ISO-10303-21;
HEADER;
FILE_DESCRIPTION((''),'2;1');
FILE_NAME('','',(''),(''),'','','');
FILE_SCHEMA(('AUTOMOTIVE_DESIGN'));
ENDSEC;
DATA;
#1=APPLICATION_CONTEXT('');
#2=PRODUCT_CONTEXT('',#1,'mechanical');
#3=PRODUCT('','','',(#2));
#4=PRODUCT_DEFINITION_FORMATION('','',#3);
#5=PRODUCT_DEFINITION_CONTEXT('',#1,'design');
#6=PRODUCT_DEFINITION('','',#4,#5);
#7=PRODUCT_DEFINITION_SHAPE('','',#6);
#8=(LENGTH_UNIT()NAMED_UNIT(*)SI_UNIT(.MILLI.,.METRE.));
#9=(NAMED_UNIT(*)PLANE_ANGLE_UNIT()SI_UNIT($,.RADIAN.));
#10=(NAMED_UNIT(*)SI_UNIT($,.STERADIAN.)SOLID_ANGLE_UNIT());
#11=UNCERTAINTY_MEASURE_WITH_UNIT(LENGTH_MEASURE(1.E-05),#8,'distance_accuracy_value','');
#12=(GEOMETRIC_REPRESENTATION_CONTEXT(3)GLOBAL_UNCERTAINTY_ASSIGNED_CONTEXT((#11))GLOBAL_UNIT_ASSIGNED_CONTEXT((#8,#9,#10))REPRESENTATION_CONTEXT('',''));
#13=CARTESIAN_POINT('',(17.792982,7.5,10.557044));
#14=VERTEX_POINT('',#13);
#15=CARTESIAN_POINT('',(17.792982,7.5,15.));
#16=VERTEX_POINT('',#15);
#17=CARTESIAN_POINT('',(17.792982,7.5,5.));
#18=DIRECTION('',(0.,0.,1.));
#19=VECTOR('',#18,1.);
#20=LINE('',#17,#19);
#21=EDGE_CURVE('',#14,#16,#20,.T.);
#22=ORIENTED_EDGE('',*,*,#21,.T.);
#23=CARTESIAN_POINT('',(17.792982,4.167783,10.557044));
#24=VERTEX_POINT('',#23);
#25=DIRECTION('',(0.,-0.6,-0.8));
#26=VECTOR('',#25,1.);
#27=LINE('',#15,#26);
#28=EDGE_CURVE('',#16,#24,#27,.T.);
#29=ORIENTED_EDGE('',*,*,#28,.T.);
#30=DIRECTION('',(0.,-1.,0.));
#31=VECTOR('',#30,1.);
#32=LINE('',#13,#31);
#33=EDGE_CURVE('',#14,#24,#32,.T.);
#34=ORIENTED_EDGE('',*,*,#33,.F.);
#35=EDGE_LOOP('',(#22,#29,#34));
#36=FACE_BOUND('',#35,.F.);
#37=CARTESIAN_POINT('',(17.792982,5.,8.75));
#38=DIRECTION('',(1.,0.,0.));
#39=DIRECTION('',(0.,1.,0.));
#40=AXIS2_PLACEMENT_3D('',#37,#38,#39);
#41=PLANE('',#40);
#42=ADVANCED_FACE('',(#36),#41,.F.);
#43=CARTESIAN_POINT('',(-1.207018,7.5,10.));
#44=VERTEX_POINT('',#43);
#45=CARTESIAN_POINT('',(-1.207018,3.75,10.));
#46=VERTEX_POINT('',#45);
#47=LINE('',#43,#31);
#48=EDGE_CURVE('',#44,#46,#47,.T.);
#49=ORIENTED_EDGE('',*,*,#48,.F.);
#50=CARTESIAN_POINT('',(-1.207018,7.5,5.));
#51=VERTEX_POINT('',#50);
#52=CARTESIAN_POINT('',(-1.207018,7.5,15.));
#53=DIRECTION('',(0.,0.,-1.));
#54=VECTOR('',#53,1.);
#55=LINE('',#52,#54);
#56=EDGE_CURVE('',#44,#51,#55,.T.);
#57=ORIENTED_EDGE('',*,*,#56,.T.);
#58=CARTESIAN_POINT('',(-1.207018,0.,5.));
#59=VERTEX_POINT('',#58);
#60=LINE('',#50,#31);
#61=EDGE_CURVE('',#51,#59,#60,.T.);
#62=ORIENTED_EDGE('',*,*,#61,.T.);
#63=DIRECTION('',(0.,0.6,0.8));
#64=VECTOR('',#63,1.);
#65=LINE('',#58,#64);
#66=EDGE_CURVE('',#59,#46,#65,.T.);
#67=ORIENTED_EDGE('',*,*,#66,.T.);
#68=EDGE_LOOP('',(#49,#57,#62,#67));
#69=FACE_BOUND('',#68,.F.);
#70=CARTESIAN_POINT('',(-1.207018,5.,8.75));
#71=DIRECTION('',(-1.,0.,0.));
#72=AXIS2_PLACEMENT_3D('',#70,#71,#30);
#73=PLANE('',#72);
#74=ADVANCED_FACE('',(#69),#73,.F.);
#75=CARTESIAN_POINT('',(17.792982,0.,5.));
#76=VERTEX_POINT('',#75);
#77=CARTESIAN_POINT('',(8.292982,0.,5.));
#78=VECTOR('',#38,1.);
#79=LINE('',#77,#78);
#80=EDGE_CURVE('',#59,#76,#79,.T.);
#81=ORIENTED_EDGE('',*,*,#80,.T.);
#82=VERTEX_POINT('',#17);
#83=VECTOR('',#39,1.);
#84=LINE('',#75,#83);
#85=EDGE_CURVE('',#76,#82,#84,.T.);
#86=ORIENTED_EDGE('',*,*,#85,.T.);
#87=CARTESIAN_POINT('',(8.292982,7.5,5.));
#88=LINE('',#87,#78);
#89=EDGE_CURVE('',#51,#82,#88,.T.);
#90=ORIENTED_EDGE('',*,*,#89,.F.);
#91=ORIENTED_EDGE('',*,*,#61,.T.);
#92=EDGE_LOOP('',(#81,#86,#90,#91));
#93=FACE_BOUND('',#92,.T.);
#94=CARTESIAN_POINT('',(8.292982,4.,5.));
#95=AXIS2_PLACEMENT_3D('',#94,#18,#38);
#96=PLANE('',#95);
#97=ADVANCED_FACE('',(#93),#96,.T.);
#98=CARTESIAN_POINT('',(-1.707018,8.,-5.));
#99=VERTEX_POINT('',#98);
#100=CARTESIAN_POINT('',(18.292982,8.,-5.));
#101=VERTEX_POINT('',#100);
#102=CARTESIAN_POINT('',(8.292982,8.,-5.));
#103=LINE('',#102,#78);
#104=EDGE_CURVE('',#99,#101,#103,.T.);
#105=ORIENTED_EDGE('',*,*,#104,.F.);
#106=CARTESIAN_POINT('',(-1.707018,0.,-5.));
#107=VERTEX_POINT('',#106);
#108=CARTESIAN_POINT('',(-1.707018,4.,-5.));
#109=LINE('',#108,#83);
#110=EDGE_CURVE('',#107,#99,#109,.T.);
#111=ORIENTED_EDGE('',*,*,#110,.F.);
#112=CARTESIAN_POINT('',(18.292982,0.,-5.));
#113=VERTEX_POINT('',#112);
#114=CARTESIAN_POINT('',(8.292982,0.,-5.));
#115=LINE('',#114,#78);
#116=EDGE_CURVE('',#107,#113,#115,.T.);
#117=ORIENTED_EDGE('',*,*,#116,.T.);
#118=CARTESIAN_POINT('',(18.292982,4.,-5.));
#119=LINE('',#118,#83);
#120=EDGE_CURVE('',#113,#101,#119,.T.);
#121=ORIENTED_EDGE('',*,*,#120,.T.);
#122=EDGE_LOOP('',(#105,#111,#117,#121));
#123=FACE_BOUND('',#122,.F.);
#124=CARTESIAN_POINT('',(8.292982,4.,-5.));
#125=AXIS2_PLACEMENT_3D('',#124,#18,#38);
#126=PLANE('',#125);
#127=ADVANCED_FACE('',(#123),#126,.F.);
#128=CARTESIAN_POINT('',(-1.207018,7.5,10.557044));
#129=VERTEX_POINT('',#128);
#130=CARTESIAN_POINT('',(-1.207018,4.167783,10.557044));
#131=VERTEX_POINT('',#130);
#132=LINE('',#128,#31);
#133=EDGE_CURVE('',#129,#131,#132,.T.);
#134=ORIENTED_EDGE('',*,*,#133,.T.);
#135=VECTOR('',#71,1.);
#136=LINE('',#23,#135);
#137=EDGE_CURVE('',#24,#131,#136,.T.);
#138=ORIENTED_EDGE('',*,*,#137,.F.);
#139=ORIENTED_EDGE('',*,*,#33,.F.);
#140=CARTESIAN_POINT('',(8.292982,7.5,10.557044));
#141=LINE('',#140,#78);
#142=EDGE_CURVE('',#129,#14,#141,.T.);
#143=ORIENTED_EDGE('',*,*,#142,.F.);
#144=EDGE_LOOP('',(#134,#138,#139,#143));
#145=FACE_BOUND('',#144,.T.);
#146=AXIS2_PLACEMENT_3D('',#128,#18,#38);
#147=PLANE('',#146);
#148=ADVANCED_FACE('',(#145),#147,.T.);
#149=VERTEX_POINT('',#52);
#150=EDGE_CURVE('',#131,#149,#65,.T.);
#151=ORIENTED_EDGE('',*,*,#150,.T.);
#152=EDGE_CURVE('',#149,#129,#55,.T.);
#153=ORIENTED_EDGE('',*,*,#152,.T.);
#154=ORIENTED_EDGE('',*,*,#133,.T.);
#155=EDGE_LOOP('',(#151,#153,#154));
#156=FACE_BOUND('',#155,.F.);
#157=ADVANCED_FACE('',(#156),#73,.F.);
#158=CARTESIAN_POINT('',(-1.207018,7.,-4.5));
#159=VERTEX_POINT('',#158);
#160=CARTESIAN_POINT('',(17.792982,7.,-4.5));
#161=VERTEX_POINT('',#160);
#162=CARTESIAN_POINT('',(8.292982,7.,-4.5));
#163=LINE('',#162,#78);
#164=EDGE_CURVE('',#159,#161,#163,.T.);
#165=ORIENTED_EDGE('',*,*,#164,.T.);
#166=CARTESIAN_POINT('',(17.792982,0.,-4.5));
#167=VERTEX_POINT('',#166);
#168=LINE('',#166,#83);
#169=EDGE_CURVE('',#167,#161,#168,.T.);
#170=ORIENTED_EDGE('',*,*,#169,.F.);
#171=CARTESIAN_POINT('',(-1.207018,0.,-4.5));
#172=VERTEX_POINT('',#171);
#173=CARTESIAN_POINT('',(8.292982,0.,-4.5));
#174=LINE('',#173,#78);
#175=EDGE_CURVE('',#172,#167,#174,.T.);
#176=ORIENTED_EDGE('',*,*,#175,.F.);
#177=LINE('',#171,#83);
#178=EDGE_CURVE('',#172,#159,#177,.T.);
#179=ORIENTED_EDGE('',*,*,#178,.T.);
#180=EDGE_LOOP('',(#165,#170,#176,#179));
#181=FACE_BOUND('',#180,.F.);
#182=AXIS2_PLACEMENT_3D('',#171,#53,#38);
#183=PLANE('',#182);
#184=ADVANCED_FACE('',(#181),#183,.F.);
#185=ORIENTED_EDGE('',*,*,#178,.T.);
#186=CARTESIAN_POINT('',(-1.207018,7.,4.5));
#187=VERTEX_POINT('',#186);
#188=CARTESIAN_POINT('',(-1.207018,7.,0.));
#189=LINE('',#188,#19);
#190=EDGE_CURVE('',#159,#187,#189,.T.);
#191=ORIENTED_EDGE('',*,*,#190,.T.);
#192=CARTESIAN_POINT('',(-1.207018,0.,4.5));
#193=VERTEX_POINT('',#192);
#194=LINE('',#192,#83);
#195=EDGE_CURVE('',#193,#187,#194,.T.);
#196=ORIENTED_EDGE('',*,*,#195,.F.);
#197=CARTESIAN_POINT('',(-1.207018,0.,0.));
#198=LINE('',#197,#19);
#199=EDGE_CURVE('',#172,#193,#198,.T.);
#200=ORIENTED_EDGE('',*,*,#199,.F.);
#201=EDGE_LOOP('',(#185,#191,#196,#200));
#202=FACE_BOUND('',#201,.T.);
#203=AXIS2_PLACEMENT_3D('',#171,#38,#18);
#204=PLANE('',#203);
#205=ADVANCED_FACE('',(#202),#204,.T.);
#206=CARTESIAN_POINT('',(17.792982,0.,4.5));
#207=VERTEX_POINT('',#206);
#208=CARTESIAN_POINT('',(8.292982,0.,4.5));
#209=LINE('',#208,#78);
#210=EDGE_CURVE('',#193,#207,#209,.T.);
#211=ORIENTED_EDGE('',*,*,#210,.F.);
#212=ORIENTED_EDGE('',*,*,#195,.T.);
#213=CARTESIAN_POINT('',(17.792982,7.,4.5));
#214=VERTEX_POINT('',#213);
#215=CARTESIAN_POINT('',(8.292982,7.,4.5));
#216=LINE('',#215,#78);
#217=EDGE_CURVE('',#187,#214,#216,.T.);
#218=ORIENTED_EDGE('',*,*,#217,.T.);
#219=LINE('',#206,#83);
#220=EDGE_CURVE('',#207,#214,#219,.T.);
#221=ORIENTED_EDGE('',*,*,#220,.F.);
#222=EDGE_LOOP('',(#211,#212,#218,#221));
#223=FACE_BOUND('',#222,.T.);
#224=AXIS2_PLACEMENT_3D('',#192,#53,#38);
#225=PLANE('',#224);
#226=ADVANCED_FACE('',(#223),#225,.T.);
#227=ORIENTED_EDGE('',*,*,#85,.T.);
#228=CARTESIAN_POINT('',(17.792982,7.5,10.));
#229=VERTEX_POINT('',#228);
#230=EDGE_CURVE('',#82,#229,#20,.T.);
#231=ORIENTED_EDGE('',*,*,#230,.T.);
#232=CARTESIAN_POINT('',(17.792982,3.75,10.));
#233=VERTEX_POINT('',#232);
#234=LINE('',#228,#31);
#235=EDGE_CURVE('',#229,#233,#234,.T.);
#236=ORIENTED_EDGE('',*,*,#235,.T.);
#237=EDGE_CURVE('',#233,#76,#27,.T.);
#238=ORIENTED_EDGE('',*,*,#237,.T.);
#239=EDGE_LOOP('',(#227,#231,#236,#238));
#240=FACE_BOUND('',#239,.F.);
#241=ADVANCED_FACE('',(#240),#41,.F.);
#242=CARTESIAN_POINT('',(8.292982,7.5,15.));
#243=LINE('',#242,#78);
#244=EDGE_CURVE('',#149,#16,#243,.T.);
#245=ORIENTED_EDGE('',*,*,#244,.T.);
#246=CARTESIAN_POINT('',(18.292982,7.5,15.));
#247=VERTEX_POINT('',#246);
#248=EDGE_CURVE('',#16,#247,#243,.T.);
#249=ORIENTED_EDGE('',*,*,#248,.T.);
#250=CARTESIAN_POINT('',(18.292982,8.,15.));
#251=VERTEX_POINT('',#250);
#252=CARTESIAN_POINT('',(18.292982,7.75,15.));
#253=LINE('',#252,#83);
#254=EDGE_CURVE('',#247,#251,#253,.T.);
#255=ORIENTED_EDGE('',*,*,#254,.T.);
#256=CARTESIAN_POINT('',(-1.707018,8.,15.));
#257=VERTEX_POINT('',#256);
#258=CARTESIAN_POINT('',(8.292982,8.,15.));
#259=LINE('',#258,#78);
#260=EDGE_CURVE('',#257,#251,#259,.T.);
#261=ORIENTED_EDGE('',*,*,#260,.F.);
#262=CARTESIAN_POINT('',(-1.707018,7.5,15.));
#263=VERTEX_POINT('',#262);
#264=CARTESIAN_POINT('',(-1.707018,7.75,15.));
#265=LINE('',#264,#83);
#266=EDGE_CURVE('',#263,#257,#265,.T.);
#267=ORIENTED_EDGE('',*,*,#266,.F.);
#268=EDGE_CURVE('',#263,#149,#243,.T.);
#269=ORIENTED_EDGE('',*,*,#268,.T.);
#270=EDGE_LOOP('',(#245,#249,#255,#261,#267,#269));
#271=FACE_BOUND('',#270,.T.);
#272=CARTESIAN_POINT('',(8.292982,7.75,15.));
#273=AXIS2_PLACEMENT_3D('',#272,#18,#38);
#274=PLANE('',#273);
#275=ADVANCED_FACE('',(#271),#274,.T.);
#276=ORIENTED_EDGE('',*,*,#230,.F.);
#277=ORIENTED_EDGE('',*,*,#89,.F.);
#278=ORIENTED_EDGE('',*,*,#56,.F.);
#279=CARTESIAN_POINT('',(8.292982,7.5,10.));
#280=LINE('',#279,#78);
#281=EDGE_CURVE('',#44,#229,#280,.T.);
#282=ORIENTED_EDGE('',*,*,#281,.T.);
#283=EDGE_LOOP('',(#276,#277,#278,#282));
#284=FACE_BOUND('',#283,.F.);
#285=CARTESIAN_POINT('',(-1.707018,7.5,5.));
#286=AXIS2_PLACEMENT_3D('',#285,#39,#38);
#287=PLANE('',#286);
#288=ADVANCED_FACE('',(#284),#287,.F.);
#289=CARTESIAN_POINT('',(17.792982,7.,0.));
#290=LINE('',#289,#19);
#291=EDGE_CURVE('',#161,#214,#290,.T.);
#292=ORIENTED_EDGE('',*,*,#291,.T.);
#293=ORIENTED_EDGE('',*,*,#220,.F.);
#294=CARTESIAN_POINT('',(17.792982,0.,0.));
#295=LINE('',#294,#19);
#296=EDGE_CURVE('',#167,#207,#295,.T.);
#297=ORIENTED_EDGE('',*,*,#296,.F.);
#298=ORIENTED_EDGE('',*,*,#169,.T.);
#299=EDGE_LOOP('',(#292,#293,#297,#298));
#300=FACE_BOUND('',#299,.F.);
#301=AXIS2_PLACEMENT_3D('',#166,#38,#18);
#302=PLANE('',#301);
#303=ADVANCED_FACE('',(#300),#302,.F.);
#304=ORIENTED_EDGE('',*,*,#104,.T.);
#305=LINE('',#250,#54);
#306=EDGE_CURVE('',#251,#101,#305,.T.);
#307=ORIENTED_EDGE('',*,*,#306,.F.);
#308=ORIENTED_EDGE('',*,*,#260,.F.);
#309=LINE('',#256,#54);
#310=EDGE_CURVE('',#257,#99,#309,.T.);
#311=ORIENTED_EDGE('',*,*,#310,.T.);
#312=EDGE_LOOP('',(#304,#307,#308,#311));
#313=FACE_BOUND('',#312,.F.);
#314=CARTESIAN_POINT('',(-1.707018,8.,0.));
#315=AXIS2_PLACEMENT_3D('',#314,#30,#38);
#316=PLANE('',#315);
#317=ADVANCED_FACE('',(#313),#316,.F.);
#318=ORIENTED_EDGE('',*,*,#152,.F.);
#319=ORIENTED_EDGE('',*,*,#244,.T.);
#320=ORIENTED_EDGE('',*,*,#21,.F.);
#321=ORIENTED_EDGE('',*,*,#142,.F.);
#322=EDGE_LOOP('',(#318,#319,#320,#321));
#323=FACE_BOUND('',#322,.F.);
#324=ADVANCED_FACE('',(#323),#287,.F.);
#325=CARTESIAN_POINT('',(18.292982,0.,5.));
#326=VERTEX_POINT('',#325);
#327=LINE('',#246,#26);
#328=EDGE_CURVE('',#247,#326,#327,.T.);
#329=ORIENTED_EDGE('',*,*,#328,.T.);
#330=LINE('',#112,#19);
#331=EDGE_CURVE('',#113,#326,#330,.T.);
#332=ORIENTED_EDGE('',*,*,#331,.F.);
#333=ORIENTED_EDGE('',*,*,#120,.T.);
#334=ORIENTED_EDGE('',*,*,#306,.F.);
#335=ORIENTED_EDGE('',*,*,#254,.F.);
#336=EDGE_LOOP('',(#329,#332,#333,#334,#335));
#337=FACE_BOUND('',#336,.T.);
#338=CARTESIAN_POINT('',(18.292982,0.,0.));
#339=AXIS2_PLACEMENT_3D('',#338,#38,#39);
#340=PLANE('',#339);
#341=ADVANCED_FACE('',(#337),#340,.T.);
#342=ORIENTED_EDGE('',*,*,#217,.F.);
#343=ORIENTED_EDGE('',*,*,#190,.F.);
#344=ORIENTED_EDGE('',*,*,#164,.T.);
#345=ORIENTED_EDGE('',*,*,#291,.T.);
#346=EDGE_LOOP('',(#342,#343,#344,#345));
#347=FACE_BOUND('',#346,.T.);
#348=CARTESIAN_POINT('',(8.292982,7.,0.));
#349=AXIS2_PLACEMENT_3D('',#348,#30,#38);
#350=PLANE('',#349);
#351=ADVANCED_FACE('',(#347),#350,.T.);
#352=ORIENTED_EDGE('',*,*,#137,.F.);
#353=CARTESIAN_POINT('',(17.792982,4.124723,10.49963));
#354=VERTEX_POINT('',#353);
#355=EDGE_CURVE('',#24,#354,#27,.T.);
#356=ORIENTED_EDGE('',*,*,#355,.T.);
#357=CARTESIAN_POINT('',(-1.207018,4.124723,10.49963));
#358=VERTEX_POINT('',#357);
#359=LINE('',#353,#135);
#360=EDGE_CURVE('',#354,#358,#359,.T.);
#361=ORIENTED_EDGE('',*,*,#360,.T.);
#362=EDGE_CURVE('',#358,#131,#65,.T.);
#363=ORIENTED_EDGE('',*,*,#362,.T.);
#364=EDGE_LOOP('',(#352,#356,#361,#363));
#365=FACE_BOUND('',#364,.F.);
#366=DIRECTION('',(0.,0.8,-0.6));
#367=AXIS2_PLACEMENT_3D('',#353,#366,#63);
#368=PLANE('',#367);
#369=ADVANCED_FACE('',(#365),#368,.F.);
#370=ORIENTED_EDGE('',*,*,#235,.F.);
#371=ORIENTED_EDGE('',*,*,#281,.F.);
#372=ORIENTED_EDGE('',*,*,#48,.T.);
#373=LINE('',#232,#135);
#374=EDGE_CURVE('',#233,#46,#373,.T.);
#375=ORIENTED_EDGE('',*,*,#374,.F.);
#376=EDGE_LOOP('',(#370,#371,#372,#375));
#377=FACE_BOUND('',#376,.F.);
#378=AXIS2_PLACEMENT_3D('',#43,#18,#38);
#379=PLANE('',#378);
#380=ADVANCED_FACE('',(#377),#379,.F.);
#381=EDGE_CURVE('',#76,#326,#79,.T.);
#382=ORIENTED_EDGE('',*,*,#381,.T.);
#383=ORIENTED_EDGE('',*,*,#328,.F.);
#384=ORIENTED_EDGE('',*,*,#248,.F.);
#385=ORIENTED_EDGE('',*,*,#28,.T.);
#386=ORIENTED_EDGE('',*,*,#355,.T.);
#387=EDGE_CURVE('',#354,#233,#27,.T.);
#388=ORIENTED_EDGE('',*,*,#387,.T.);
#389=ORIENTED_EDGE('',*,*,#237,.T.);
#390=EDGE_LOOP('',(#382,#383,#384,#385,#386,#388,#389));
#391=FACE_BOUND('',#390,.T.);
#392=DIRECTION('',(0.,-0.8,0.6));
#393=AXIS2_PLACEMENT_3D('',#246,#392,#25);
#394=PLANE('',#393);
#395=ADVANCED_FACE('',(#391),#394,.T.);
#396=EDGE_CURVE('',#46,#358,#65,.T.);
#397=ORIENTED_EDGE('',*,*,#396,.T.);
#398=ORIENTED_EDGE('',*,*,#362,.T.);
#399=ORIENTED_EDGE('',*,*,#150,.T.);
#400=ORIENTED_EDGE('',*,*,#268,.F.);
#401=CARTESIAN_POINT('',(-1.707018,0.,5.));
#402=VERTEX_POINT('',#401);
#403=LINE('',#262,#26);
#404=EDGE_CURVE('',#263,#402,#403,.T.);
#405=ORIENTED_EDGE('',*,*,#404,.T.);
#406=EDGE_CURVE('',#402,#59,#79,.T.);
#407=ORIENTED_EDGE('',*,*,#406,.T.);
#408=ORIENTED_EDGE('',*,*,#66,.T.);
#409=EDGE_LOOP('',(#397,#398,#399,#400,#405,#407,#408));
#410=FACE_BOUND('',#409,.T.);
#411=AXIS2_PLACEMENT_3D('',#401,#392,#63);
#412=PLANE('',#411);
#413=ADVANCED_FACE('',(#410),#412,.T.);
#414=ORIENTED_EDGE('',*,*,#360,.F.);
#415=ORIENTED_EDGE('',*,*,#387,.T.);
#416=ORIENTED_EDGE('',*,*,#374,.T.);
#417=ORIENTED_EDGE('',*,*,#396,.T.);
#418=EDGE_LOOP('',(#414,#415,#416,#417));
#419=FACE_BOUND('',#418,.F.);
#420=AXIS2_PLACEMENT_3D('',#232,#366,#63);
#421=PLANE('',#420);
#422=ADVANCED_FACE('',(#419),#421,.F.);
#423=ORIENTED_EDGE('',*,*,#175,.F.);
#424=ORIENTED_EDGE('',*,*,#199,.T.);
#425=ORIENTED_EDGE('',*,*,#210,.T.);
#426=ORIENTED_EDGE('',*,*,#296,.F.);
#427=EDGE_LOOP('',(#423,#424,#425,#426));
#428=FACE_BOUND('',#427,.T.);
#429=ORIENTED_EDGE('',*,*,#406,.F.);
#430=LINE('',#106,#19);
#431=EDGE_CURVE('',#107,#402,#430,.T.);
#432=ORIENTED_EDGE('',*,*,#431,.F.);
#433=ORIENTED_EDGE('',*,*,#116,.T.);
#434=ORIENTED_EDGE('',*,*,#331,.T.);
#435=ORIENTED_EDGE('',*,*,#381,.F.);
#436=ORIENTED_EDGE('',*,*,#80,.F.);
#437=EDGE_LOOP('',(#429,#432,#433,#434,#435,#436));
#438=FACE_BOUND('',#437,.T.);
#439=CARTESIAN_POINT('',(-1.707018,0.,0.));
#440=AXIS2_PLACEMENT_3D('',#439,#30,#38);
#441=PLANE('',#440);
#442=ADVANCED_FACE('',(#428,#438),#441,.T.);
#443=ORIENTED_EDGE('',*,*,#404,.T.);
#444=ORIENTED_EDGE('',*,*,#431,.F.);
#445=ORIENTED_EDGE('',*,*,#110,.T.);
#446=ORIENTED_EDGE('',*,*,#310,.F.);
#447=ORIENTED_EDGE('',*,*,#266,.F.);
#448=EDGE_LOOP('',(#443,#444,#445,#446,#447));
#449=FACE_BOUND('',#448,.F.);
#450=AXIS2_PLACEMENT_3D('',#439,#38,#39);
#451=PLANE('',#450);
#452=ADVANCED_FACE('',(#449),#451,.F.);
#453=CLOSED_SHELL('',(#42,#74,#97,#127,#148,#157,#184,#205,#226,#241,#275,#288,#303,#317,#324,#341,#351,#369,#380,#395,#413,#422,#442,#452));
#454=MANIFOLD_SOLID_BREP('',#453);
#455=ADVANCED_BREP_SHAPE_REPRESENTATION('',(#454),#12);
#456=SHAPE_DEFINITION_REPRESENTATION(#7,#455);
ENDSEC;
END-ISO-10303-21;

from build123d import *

# Parameters (mm, degrees)
F0_W      = 20
F0_H      = 8
F1_DEPTH  = 5
F2_W      = 20
F2_H      = 0.5
F3_DEPTH  = 10
F5_DEPTH  = 0.5
F7_DEPTH  = 0.5
F8_DEPTH  = 5
F11_W     = 19
F11_H     = 0.5570442975
F12_DEPTH = 4
F14_DEPTH = 25
F15_W     = 19
F15_H     = 9
F16_DEPTH = 7


# Not quite as in the source:
# - a feature of the source that left no trace in its solid (it failed there, or was rolled back) is left out


with BuildPart() as f1:
    # F0 (on Top) → F1 (new body)
    with BuildSketch(Plane.XY):
        with Locations((8.2929818355, 4)):
            Rectangle(F0_W, F0_H)
    extrude(amount=F1_DEPTH)

    # F2 (on face) → F3 (join)
    with BuildSketch(Plane.XY.offset(5)):
        with Locations((8.2929818355, 7.75)):
            Rectangle(F2_W, F2_H)
    extrude(amount=F3_DEPTH)

    # F4 (on face) → F5 (join)
    with BuildSketch(Plane(origin=(-1.7070181645, 0, 0), x_dir=(0, -1, 0), z_dir=(-1, 0, 0))):
        Polygon((-7.5, 5), (0, 5), (-7.5, 15), align=None)
    extrude(amount=-F5_DEPTH)

    # F6 (on face) → F7 (join)
    with BuildSketch(Plane.YZ.offset(18.2929818355)):
        Polygon((7.5, 5), (7.5, 15), (0, 5), align=None)
    extrude(amount=-F7_DEPTH)

    # F8 (add): a face of the model
    f8_faces = [f1.faces().sort_by_distance(p)[0] for p in [
        (8.2929818355, 4, 0),
    ]]
    extrude(f8_faces, amount=F8_DEPTH)

    # F11 (on face) → F12 (join)
    with BuildSketch(Plane.XZ.offset(-7.5)):
        with Locations((8.2929818355, 10.2785221487)):
            Rectangle(F11_W, F11_H)
    extrude(amount=F12_DEPTH)

    # F13 (on face) → F14 (cut)
    with BuildSketch(Plane.YZ.offset(17.7929818355)):
        Polygon((3.75, 10), (4.1247227065, 10.4996302754), (4.1677832231, 10.5570442975), (3.5, 10.5570442975), (3.5, 10), align=None)
    extrude(amount=-F14_DEPTH, mode=Mode.SUBTRACT)

    # F15 (on face) → F16 (cut)
    with BuildSketch(Plane.XZ):
        with Locations((8.2929818355, 0)):
            Rectangle(F15_W, F15_H)
    extrude(amount=-F16_DEPTH, mode=Mode.SUBTRACT)


solid = f1.part
